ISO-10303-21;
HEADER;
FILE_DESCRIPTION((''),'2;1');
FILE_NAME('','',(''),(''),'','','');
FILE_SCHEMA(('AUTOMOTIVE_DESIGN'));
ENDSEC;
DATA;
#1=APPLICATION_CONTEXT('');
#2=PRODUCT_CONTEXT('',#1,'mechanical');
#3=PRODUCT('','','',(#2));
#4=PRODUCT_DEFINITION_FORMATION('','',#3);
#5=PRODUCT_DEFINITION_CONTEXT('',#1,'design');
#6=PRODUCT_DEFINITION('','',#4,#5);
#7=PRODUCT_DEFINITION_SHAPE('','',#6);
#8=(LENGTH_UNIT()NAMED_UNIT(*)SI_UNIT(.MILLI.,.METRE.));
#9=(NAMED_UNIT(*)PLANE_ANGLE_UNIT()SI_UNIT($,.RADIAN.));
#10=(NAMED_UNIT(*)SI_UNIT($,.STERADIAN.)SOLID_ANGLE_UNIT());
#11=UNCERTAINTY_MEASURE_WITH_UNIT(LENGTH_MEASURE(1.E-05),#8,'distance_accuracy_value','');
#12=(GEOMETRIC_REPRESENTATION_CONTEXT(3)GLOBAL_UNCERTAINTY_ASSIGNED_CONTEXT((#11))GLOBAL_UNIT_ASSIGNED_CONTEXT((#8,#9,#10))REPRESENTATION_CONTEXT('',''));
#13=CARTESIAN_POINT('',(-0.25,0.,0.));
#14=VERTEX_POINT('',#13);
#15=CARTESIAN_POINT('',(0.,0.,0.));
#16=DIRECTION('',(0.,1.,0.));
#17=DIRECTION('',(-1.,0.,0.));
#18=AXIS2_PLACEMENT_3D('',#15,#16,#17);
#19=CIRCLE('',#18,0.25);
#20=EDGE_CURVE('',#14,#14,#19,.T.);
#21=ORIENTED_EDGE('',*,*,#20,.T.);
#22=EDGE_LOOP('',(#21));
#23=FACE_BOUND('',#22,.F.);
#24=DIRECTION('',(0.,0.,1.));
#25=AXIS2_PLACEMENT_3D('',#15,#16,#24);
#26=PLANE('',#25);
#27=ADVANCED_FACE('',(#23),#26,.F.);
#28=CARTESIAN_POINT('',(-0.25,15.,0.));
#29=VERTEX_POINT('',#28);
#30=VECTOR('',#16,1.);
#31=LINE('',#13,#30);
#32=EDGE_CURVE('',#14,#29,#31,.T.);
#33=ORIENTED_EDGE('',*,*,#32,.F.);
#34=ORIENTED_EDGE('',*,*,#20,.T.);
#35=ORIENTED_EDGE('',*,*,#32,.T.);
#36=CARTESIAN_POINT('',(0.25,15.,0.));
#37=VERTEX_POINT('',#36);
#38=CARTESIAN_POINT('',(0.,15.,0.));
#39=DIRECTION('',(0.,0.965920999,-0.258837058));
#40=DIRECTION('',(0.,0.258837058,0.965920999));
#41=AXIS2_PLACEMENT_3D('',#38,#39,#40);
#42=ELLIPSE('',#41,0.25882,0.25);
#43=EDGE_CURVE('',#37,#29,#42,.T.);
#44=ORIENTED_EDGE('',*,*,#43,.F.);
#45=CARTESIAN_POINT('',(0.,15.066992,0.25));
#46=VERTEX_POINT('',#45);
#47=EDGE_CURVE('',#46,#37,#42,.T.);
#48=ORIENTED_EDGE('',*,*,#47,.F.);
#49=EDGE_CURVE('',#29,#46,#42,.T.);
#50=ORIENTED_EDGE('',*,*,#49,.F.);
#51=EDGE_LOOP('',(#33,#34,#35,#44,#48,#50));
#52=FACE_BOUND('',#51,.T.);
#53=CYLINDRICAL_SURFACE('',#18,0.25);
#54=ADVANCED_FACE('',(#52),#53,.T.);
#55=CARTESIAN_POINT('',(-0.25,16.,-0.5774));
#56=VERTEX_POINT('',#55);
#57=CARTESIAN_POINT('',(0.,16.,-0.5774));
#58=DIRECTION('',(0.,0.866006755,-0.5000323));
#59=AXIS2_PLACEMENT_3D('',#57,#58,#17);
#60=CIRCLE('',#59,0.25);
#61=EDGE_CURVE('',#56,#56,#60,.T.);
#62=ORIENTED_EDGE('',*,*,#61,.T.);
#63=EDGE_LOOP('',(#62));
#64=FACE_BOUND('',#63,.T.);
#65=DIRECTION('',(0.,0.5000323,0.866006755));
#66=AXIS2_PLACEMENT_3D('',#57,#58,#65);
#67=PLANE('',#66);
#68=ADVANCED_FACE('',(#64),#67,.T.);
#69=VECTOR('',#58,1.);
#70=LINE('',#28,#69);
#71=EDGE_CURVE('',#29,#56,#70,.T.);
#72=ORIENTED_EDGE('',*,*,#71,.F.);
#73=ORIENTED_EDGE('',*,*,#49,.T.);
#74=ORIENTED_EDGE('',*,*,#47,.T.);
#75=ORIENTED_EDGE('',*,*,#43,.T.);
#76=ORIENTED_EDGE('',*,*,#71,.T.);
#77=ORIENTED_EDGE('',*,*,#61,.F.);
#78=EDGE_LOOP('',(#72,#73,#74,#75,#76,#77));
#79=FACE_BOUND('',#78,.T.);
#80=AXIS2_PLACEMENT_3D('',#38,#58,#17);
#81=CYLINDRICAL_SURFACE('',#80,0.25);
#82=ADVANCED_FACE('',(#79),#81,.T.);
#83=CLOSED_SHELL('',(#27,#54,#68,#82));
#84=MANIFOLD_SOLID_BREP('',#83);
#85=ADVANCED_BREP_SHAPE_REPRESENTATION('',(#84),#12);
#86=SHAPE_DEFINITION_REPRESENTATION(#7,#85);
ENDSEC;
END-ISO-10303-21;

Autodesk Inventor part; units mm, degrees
ref_plane "YZ Plane" through (0, 0, 0) normal (1, 0, 0) x (0, 1, 0)
ref_plane "XZ Plane" through (0, 0, 0) normal (0, 1, 0) x (-1, 0, 0)
ref_plane "XY Plane" through (0, 0, 0) normal (0, 0, 1) x (1, 0, 0)
sketch "Sketch1" plane through (0, 0, 0) normal (0, 1, 0) x (-1, 0, 0)
  circle A0 centre (0, 0) radius 0.25
  dimension "d0" = 0.5
sketch "Sketch2" plane through (0, 0, 0) normal (1, 0, 0) x (0, 1, 0)
  line L0 (0, 0) -> (15, 0)
  line L1 (15, 0) -> (16, -0.5774)
  dimension "d1" = 15
  dimension "d2" = 150
  dimension "d3" = 1
sweep "Sweep1" add profiles "Sketch1" path "Sketch2"
properties part number "cable 30° 2"
